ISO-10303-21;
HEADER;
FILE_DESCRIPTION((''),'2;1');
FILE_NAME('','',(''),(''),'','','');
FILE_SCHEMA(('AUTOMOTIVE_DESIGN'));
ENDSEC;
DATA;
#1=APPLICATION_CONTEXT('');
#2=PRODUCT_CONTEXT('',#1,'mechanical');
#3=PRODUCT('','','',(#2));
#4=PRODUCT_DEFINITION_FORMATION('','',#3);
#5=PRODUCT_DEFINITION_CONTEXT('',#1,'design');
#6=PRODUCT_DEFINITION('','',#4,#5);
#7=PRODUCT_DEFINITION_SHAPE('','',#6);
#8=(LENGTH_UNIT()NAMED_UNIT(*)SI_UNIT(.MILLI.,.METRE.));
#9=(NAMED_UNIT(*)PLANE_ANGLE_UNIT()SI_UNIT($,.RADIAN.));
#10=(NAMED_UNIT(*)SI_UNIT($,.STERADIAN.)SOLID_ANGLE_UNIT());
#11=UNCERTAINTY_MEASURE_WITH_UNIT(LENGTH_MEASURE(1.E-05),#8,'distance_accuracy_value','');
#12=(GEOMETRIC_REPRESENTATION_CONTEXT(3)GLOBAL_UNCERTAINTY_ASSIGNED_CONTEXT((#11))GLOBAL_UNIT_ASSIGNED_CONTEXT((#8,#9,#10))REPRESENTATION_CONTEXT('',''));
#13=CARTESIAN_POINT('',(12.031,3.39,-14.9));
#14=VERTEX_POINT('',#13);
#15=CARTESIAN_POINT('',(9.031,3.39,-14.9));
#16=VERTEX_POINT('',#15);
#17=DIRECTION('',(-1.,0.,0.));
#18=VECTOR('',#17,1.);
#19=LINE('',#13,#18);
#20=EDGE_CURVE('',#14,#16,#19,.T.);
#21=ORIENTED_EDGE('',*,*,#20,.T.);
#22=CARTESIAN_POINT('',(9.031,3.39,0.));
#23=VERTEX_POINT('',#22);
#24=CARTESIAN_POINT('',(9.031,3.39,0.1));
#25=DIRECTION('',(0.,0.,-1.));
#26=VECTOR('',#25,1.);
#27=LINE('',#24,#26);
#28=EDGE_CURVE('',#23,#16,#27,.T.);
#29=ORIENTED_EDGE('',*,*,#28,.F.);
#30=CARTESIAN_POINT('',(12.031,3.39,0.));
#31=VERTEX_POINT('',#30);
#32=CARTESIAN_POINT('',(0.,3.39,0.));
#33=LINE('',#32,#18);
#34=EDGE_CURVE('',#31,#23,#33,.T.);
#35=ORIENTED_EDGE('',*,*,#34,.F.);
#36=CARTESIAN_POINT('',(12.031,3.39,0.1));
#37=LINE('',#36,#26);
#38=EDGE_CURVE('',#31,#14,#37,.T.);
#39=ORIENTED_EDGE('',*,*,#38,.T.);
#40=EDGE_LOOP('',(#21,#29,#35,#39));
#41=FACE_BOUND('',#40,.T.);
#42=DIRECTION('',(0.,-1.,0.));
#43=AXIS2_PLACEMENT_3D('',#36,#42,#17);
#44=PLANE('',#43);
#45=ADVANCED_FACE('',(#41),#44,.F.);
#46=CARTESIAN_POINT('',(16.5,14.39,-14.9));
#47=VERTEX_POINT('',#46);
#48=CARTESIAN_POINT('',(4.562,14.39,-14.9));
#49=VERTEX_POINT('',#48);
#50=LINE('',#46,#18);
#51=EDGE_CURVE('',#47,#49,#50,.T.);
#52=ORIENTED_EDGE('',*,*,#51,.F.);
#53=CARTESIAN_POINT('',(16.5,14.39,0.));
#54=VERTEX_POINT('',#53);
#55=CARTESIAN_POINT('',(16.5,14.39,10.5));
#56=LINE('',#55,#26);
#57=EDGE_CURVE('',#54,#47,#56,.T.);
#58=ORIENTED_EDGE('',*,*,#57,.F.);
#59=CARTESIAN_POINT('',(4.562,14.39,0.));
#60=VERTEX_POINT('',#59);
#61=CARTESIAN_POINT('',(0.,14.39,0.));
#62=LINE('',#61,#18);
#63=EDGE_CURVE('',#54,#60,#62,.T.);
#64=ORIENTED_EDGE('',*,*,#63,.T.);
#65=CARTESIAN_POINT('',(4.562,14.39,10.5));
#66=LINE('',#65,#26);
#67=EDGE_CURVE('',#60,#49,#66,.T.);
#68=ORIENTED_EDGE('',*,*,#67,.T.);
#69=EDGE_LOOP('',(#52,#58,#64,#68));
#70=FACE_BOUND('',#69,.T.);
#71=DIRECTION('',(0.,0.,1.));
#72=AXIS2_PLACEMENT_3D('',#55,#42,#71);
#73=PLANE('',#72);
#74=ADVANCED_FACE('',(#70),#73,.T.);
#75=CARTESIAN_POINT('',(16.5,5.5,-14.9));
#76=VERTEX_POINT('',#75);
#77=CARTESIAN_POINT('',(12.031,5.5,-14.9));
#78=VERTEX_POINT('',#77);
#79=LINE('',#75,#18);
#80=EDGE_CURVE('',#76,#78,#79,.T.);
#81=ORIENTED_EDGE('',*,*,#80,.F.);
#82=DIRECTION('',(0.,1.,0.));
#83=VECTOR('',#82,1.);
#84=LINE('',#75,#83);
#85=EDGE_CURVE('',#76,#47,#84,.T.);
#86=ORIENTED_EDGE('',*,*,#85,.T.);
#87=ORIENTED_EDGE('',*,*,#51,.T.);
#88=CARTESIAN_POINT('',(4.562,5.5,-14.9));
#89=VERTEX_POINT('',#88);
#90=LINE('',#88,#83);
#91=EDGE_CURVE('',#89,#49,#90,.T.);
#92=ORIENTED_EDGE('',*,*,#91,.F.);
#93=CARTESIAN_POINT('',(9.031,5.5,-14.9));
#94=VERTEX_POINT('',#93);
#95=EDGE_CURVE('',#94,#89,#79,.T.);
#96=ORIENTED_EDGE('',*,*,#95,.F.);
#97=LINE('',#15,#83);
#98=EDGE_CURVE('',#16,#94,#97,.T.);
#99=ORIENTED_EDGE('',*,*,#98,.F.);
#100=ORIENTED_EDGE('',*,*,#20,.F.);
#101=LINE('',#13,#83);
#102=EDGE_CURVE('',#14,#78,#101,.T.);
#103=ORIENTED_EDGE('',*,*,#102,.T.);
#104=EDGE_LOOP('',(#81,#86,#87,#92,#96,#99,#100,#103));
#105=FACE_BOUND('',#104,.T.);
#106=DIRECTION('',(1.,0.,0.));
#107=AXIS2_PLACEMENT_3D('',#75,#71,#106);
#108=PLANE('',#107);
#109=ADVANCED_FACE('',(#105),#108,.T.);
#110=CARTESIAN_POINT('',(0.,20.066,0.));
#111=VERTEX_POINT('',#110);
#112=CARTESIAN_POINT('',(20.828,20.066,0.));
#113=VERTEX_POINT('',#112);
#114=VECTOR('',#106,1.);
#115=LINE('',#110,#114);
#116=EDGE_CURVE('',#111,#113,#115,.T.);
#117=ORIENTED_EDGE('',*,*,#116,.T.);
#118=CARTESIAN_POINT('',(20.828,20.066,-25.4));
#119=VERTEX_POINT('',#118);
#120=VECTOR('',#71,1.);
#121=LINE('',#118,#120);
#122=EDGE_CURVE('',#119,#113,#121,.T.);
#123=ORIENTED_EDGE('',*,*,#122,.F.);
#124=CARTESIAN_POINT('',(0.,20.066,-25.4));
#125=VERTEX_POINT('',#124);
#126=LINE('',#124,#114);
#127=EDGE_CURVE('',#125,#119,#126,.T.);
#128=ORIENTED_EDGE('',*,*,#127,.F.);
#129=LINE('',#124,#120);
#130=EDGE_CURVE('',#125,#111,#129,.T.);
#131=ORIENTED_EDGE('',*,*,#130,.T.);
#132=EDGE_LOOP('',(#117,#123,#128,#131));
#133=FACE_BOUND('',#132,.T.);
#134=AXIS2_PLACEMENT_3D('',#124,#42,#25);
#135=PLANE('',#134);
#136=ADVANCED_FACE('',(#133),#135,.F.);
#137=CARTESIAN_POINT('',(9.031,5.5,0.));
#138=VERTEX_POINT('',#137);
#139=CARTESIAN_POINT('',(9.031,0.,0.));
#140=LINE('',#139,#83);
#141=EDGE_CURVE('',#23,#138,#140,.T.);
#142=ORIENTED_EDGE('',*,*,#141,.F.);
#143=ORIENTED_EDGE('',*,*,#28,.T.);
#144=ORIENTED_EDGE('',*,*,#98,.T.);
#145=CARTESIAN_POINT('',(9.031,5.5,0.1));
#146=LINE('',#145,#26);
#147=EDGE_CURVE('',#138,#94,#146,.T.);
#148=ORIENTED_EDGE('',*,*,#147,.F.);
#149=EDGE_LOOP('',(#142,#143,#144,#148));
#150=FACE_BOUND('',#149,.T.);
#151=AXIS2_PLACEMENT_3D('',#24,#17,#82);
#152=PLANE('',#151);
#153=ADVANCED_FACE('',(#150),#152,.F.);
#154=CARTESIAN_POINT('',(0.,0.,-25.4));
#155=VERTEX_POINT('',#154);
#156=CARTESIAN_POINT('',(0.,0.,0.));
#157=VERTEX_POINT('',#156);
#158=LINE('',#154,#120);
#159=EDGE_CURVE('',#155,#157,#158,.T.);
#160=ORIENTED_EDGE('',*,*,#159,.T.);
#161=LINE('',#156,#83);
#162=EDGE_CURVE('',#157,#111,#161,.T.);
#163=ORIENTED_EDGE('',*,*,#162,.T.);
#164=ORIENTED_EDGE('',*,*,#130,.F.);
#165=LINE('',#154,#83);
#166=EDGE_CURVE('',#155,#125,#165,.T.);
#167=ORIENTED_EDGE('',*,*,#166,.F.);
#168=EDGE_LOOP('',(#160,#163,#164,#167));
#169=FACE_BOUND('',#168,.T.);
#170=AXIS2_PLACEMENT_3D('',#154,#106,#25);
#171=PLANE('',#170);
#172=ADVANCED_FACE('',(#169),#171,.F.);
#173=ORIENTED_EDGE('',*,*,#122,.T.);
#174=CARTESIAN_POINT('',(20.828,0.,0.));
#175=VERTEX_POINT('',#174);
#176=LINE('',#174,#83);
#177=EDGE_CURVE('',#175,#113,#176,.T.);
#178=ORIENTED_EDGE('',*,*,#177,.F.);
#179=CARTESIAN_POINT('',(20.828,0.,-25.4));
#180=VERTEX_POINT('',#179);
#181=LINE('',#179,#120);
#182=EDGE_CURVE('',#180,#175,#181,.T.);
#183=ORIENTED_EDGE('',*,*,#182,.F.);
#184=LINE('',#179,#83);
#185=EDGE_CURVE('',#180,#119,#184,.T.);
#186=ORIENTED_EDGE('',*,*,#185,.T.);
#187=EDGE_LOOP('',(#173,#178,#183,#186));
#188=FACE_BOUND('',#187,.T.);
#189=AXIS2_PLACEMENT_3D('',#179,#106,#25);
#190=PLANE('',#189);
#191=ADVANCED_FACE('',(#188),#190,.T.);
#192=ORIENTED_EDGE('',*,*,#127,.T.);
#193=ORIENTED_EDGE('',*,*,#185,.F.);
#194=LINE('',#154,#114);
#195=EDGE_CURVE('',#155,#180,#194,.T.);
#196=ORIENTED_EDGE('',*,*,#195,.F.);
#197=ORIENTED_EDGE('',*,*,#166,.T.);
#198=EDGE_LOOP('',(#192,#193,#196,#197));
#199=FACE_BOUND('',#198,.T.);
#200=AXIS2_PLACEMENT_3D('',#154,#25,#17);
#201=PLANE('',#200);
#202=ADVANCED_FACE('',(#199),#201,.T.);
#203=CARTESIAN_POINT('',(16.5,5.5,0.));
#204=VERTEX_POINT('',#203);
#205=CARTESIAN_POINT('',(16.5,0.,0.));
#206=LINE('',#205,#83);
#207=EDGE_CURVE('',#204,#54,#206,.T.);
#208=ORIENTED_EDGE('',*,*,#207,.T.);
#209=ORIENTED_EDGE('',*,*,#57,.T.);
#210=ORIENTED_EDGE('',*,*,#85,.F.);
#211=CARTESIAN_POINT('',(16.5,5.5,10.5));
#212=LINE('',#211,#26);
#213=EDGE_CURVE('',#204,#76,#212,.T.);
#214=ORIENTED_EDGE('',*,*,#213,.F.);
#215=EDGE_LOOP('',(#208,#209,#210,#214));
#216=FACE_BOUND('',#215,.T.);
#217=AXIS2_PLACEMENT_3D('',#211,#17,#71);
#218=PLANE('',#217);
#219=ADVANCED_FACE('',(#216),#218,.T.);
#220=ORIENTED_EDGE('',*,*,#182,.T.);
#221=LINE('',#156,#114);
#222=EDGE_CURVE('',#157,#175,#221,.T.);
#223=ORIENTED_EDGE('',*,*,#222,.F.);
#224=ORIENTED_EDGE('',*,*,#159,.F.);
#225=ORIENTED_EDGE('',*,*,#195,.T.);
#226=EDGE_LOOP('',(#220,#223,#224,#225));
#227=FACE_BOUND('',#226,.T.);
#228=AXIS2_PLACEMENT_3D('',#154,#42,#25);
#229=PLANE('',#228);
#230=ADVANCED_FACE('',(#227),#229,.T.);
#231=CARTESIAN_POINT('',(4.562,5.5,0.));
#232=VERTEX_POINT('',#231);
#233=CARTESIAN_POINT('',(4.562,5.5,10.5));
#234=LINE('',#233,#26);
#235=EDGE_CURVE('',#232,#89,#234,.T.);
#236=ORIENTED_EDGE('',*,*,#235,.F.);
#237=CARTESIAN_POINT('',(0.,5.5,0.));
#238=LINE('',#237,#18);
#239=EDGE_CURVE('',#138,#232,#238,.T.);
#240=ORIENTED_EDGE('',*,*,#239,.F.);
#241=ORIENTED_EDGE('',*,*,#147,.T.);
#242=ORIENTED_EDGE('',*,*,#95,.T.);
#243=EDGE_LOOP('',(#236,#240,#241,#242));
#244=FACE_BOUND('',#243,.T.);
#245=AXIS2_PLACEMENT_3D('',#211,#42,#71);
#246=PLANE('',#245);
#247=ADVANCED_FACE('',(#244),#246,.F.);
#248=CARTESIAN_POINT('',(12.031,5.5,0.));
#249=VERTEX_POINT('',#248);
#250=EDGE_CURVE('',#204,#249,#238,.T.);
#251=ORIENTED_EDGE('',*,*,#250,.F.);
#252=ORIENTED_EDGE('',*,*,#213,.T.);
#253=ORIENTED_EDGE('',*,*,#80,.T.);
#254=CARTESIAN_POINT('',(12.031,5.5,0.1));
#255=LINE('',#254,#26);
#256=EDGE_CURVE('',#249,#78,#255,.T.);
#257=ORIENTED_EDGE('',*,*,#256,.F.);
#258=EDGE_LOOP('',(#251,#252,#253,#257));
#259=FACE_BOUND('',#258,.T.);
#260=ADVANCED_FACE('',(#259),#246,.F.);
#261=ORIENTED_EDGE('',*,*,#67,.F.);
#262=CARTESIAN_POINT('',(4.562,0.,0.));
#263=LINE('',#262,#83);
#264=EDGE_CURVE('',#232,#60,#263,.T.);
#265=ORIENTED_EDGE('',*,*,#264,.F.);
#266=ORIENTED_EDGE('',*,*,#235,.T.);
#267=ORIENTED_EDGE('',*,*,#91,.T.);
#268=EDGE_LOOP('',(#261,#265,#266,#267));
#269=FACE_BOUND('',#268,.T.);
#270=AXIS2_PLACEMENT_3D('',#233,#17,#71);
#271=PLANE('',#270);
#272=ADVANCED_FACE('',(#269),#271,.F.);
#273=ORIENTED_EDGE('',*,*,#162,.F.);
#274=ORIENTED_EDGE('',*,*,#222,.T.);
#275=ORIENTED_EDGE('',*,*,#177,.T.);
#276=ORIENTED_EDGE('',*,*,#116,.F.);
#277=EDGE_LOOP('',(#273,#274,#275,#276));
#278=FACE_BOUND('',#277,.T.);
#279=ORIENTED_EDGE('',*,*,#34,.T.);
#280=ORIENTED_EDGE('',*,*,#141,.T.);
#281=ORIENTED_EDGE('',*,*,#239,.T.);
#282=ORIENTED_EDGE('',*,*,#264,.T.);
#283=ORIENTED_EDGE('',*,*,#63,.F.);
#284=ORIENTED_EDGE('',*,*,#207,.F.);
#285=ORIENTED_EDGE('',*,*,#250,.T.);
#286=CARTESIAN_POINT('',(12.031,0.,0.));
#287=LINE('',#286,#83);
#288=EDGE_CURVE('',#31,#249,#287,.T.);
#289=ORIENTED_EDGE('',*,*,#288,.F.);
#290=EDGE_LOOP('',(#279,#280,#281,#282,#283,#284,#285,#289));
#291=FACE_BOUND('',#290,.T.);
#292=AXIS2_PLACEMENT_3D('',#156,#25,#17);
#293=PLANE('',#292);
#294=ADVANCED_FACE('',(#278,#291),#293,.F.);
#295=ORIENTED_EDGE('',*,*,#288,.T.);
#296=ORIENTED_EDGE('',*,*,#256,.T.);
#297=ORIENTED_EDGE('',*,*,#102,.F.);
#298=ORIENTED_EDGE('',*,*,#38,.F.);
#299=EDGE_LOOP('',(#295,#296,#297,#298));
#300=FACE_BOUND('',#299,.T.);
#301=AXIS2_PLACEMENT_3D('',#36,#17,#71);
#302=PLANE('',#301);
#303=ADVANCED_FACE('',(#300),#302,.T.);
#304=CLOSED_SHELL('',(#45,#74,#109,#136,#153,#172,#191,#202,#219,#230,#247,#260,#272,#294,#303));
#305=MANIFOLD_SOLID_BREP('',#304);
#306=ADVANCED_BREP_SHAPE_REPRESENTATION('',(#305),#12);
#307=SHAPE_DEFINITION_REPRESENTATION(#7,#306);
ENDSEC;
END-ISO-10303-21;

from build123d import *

# Parameters (mm, degrees)
SKETCH1_W           = 20.828
SKETCH1_H           = 20.066
BOSS_EXTRUDE1_DEPTH = 25.4
CAVITY1_START       = 4.562
CAVITY1_OUTLINE_W   = 8.89
CAVITY1_OUTLINE_H   = 14.9
CAVITY1_DEPTH       = 11.938
CAVITY1_START_2     = 9.031
CAVITY1_2_OUTLINE_W = 2.11
CAVITY1_2_OUTLINE_H = 14.9
CAVITY1_2_DEPTH     = 3


# Read off the part's stored shape, not the designer's step: Cavity1
with BuildPart() as part:
    # Sketch1 → Boss-Extrude1 (new body)
    with BuildSketch(Plane.XY):
        with Locations((10.414, 10.033)):
            Rectangle(SKETCH1_W, SKETCH1_H)
    extrude(amount=-BOSS_EXTRUDE1_DEPTH)

    # Cavity1 outline → Cavity1 (cut)
    with BuildSketch(Plane.YZ.offset(CAVITY1_START)):
        with Locations((9.945, -7.45)):
            Rectangle(CAVITY1_OUTLINE_W, CAVITY1_OUTLINE_H)
    extrude(amount=CAVITY1_DEPTH, mode=Mode.SUBTRACT)

    # Cavity1 2 outline → Cavity1 2 (cut)
    with BuildSketch(Plane.YZ.offset(CAVITY1_START_2)):
        with Locations((4.445, -7.45)):
            Rectangle(CAVITY1_2_OUTLINE_W, CAVITY1_2_OUTLINE_H)
    extrude(amount=CAVITY1_2_DEPTH, mode=Mode.SUBTRACT)


solid = part.part
